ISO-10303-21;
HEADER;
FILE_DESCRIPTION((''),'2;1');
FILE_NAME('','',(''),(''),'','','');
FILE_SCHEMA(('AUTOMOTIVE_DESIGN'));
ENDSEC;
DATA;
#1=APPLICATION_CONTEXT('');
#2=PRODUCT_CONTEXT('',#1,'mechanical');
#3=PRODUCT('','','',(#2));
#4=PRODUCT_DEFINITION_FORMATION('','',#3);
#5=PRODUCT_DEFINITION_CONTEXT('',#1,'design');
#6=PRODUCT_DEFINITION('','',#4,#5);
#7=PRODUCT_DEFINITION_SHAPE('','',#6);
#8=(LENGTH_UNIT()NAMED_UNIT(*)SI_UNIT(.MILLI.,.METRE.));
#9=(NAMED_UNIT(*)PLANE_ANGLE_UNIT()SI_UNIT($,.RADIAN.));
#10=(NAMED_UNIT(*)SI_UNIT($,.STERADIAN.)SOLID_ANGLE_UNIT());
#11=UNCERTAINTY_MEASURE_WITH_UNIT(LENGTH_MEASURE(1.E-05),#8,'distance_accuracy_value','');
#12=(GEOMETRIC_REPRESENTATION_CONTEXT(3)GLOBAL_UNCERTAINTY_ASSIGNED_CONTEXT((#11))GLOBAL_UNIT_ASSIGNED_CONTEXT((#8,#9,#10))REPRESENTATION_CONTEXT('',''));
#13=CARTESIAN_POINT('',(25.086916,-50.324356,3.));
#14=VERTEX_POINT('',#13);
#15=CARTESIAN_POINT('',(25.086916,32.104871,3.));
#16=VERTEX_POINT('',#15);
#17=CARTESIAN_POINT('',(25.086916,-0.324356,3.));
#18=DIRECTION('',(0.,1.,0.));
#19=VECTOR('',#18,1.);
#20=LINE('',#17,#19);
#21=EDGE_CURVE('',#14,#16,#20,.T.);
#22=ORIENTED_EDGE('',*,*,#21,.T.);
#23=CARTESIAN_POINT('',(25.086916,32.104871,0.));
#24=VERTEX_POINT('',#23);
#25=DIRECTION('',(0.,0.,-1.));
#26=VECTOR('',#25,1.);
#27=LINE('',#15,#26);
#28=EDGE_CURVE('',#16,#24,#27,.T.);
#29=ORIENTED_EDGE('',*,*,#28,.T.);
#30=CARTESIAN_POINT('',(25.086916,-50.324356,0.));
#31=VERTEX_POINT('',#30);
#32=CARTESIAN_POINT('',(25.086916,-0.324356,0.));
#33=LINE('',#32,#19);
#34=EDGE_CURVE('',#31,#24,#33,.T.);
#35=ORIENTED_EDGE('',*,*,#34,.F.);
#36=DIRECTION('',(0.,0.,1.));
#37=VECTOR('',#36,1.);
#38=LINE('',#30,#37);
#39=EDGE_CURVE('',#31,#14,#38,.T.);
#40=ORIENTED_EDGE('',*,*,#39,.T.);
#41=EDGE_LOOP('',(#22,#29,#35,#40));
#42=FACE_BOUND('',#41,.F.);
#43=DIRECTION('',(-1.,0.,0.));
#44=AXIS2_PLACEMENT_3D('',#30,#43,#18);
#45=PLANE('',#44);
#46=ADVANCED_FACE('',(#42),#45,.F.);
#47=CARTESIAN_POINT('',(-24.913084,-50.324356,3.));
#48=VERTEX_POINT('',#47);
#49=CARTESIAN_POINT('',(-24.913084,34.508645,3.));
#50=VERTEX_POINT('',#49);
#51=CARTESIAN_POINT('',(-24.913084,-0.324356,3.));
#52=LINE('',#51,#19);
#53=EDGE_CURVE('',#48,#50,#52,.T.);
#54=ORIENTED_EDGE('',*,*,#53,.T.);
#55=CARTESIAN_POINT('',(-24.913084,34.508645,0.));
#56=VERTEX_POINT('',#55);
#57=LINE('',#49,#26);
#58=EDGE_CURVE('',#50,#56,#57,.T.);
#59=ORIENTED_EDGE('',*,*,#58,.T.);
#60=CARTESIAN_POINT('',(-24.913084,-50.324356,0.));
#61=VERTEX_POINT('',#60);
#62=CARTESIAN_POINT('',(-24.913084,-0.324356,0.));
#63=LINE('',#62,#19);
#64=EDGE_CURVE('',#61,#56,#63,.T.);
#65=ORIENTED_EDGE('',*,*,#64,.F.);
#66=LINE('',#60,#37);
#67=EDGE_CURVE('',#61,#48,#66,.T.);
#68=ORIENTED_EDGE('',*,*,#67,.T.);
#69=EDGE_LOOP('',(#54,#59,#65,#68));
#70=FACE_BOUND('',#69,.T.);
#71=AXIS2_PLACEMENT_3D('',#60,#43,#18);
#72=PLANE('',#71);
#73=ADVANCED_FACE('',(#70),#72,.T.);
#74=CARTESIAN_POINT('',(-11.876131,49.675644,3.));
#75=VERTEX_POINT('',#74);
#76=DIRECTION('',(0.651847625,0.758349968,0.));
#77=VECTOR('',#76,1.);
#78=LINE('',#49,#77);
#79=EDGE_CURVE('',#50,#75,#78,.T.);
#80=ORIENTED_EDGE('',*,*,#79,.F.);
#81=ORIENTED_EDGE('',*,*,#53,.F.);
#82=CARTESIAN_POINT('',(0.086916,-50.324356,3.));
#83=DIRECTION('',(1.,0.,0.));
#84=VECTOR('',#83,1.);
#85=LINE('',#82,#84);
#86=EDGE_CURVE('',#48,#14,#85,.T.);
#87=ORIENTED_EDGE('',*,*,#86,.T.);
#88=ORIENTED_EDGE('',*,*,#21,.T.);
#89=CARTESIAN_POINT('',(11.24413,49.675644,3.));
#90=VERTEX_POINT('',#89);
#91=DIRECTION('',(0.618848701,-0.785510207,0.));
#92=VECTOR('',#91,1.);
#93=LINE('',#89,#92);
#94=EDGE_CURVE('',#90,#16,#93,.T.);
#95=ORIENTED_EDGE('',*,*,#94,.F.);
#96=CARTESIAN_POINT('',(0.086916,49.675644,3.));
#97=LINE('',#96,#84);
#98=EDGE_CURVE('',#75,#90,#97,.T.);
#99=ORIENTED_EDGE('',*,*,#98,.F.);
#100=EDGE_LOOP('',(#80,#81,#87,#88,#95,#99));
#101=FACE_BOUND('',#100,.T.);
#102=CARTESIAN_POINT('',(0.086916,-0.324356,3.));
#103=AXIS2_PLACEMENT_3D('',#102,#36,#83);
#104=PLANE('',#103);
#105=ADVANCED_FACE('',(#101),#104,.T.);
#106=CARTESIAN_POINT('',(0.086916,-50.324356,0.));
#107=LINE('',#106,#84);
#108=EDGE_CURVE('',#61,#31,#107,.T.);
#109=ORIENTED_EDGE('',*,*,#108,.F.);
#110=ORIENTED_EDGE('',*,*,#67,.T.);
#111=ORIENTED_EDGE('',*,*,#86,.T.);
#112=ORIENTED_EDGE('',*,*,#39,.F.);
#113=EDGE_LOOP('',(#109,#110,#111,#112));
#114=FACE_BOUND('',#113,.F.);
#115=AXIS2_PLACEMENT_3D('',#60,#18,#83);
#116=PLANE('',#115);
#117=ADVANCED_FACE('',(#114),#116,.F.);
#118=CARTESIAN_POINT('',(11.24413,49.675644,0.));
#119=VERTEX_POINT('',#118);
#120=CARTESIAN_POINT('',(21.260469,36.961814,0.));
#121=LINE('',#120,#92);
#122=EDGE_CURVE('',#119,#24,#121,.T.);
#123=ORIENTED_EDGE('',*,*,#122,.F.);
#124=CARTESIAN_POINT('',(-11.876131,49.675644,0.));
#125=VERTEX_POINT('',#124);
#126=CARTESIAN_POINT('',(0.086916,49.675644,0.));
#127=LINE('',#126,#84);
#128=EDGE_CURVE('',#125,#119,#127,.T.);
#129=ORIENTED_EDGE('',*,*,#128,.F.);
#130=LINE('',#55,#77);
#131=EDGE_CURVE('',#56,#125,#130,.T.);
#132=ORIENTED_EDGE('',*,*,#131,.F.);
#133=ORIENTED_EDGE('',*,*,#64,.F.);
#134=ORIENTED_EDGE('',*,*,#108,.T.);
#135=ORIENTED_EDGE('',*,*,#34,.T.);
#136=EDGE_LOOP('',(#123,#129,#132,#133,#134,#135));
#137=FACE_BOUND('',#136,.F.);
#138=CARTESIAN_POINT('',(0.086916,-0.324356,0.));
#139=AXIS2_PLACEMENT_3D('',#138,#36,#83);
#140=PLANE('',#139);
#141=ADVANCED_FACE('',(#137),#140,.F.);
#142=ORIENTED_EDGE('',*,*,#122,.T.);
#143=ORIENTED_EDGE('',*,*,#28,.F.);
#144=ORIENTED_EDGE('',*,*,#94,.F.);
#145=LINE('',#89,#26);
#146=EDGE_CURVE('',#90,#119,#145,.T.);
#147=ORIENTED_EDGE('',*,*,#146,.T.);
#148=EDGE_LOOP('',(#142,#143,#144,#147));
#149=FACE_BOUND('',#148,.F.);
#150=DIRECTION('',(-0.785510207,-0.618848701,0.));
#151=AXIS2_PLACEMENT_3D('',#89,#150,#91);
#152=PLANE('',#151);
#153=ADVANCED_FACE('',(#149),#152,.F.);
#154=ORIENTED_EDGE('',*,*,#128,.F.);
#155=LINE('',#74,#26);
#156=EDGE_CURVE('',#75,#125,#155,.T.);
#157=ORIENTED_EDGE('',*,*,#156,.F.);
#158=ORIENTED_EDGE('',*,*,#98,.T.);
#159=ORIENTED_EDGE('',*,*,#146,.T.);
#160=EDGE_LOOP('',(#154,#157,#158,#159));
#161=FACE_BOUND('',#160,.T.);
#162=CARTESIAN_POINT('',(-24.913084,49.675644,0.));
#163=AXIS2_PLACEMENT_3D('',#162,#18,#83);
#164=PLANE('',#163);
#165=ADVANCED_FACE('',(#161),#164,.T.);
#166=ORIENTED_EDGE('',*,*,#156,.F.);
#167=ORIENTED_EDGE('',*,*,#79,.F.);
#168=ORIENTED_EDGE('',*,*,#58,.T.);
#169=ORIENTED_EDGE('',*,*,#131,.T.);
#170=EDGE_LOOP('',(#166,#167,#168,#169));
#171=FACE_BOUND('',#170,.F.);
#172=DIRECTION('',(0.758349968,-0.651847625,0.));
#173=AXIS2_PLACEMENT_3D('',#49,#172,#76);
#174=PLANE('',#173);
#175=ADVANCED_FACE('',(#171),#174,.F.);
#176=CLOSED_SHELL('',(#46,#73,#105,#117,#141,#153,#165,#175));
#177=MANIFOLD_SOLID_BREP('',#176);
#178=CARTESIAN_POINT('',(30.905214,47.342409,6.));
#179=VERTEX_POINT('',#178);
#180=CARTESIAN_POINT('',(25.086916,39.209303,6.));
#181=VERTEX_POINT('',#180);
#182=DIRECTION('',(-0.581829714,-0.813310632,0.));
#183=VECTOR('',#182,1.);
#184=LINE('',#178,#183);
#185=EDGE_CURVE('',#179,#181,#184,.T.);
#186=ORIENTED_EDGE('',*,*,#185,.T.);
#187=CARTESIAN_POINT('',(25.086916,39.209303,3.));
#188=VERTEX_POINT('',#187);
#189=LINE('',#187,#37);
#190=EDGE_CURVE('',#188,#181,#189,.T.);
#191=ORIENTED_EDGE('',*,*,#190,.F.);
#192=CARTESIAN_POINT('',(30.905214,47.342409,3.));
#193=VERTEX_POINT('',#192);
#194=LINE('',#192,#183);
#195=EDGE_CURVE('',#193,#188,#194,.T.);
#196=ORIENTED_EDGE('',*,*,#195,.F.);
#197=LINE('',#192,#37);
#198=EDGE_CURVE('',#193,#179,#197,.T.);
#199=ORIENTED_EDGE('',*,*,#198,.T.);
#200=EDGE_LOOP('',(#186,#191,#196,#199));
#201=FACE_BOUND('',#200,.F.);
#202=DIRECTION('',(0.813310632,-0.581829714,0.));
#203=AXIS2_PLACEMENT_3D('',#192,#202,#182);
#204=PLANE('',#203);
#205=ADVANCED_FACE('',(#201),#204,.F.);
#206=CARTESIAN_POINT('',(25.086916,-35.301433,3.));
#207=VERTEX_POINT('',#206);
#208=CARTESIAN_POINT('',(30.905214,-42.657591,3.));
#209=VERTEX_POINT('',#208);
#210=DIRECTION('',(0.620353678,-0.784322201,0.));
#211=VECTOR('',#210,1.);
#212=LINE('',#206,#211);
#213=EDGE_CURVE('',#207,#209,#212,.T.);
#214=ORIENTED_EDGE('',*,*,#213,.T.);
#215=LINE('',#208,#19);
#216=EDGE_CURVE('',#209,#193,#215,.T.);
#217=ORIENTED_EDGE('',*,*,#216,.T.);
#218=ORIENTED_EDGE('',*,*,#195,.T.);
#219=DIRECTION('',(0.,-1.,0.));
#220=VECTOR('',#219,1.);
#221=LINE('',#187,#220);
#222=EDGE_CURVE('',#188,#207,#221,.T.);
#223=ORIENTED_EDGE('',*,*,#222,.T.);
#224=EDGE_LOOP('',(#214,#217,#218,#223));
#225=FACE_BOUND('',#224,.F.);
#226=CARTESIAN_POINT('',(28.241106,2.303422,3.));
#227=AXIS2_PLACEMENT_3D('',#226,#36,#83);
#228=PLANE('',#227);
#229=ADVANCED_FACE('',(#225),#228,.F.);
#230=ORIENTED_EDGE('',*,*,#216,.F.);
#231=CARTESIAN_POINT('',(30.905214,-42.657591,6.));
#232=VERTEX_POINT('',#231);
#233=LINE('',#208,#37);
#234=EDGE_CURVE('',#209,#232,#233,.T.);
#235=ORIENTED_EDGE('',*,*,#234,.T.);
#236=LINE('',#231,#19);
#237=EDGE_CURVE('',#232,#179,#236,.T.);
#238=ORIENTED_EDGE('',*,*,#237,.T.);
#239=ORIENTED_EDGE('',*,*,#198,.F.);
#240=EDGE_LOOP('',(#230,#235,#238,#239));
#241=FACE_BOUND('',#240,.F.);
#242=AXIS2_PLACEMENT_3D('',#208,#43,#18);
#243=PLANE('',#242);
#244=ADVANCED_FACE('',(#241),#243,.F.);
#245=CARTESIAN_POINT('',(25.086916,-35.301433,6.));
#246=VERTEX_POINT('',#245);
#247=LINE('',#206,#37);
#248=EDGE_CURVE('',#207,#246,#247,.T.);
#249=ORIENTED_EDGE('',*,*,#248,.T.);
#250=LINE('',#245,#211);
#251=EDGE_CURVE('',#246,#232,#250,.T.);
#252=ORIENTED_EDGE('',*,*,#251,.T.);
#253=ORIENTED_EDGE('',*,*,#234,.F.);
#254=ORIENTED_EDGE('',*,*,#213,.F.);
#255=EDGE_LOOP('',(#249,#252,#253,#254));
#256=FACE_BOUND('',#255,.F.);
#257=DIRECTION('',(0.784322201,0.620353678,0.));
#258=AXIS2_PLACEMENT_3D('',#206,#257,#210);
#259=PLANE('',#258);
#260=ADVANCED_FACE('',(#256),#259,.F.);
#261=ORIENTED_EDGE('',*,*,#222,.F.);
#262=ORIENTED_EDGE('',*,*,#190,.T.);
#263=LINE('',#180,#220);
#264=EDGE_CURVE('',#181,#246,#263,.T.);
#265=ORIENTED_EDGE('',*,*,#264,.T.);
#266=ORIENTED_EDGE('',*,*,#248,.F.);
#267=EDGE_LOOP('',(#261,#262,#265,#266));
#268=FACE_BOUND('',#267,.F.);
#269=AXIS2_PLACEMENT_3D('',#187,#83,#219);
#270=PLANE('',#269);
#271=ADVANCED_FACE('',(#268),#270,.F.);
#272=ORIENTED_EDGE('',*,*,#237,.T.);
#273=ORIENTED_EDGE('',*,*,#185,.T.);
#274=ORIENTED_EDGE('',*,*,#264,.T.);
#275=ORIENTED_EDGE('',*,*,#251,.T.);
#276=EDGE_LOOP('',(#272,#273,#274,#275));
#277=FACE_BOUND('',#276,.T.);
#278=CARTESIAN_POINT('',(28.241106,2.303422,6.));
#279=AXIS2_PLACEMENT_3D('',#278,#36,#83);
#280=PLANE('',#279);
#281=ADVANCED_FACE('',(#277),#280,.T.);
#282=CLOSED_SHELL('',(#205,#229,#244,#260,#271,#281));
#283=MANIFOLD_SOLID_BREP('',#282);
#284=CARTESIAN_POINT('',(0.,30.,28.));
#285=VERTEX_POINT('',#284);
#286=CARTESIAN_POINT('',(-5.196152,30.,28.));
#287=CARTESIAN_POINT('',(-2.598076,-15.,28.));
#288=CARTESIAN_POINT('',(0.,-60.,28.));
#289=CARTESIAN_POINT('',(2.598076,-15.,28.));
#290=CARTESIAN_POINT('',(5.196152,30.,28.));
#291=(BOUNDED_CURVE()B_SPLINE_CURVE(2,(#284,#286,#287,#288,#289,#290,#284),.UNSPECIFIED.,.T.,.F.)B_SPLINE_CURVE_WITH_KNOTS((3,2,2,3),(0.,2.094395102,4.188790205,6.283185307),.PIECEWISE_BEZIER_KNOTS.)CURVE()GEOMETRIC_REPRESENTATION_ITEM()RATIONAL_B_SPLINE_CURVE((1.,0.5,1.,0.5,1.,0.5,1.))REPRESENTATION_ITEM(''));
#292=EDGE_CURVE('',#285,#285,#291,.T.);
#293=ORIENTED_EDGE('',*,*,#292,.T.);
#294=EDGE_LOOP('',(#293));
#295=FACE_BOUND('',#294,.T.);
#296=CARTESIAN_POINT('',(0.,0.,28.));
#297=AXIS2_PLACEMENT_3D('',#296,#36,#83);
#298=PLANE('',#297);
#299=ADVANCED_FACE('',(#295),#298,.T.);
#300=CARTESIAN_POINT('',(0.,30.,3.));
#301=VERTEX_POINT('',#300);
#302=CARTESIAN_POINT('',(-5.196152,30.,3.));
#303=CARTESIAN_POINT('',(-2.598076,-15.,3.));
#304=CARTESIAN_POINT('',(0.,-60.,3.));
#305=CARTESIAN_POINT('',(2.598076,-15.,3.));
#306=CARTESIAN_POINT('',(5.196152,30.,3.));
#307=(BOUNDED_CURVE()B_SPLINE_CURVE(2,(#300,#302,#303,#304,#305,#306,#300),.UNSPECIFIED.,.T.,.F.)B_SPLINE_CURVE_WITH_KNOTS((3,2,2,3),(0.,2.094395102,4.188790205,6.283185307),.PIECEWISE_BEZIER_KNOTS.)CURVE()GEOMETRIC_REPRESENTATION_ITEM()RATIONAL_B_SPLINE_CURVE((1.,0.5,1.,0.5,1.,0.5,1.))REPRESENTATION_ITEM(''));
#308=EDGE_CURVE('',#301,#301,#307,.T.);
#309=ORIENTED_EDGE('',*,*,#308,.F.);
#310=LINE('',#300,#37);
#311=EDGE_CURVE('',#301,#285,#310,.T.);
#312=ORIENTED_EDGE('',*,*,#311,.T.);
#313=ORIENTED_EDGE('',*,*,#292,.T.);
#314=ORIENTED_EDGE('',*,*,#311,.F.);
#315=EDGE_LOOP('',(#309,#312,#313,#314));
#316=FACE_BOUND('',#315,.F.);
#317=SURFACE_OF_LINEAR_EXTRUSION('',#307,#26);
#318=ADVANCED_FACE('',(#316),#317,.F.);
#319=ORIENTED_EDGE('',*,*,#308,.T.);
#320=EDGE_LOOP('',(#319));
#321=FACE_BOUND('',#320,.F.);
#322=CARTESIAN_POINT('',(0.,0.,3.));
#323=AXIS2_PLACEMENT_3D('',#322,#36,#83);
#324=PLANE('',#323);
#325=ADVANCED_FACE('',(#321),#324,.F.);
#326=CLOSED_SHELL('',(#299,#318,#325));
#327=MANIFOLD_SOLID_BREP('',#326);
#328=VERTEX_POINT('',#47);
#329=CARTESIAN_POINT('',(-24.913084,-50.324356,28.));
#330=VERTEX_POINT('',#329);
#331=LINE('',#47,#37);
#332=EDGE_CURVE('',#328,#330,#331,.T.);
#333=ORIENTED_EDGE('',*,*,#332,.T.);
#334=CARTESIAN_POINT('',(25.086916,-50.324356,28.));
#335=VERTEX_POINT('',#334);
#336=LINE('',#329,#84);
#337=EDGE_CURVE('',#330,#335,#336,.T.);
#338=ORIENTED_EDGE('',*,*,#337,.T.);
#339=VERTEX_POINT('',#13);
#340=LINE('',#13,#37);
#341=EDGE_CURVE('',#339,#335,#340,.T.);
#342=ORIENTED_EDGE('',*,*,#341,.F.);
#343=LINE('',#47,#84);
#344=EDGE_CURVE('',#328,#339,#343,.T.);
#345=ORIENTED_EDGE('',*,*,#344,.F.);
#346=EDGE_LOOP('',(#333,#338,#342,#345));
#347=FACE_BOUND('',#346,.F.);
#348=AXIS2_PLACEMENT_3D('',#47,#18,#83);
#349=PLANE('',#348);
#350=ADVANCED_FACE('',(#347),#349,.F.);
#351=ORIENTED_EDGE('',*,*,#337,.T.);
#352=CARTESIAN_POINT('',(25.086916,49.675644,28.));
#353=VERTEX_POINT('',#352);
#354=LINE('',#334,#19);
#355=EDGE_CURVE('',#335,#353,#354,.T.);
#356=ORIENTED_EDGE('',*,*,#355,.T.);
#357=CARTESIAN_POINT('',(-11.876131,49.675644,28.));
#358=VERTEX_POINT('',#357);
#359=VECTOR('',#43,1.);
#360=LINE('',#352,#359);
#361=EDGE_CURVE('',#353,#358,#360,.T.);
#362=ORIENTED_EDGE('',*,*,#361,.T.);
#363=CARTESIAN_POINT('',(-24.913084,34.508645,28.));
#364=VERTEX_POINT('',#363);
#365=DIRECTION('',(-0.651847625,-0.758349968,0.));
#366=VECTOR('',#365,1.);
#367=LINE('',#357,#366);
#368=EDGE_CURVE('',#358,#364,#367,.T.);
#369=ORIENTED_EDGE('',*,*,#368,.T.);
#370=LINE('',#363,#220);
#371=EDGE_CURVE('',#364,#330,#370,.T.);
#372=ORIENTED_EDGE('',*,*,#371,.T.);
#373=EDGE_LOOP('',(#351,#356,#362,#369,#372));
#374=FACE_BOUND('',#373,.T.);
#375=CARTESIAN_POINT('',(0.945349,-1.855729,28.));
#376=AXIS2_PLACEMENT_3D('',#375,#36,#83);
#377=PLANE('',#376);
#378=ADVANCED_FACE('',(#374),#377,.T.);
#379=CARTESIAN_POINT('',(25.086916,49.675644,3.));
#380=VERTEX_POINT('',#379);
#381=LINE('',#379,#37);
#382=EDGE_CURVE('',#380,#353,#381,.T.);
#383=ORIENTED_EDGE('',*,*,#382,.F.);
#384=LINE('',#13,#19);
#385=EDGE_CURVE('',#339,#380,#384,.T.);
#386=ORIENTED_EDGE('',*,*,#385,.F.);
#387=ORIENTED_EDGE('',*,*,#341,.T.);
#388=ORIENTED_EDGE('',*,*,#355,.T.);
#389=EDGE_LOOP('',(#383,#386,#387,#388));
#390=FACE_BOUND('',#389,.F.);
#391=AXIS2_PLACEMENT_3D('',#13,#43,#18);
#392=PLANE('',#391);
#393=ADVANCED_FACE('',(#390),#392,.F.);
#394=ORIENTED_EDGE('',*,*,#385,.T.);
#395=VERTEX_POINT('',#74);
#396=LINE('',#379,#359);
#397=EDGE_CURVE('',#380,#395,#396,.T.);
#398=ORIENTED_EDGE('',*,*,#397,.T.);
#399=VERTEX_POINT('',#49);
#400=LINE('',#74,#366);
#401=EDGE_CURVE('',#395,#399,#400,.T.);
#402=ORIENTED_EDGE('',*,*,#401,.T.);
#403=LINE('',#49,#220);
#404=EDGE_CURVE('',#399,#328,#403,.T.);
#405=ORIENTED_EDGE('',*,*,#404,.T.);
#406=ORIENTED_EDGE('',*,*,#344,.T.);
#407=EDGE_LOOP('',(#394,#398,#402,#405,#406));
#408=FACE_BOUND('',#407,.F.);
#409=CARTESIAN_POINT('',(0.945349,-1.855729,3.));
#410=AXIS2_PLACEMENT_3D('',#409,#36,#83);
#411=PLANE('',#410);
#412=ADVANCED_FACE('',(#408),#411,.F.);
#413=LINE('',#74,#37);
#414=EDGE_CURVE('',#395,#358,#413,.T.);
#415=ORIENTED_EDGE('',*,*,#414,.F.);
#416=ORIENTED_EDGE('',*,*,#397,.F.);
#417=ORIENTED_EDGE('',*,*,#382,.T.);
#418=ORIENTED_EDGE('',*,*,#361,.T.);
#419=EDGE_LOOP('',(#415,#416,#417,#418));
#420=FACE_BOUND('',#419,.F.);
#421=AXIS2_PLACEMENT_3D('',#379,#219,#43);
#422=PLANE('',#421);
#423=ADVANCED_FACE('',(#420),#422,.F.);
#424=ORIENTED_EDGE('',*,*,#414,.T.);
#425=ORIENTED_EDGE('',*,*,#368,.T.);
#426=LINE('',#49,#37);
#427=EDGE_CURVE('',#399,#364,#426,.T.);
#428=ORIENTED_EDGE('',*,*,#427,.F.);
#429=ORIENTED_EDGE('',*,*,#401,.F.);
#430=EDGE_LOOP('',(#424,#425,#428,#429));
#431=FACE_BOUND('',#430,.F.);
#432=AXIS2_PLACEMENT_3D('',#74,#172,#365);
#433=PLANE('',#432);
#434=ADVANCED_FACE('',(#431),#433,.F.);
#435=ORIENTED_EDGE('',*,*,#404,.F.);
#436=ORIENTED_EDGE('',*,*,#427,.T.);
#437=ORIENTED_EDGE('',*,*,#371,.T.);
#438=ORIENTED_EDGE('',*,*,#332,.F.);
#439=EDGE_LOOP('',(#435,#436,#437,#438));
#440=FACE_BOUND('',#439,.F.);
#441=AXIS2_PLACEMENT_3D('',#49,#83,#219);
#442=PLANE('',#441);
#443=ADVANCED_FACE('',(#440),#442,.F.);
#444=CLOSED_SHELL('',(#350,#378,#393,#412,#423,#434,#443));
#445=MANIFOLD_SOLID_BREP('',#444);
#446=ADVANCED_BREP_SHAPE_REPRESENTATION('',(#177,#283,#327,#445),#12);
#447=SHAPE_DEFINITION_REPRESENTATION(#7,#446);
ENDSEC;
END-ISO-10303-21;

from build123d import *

# Parameters (mm, degrees)
F0_W      = 50
F0_H      = 100
F1_DEPTH  = 3
F3_DEPTH  = 3
F6_DEPTH  = 3
F8_DEPTH  = 25
F12_DEPTH = 25


# Not quite as in the source:
# - a feature of the source that left no trace in its solid (it failed there, or was rolled back) is left out


with BuildPart() as f1:
    # F0 (on Top) → F1 (new body)
    with BuildSketch(Plane.XY):
        with Locations((0.0869164988, -0.3243560148)):
            Rectangle(F0_W, F0_H)
    extrude(amount=F1_DEPTH)

    # F4 (on face) → F6 (cut)
    with BuildSketch(Plane.XY.offset(3)):
        Polygon((-24.9130835012, 49.6756439852), (-24.9130835012, 34.5086446194), (-11.8761310107, 49.6756439852), align=None)
    extrude(amount=-F6_DEPTH, mode=Mode.SUBTRACT)

    # F7 (on face) → F8 (cut)
    with BuildSketch(Plane.XY.offset(3)):
        Polygon((25.0869164988, 49.6756439852), (11.2441298249, 49.6756439852), (25.0869164988, 32.1048707049), align=None)
    extrude(amount=-F8_DEPTH, mode=Mode.SUBTRACT)


with BuildPart() as f3:
    # F2 (on face) → F3 (new body)
    with BuildSketch(Plane.XY.offset(3)):
        Polygon((30.9052136403, 47.3424089814), (25.0869164988, 39.2093026638), (25.0869164988, -35.3014330966), (30.9052136403, -42.6575910186), align=None)
    extrude(amount=F3_DEPTH)


with BuildPart() as f12:
    # F10 (on face) → F12 (new body)
    with BuildSketch(Plane.XY.offset(3)):
        with BuildLine():
            add(Edge.make_bspline(
                [(0, 30), (-5.1961524227, 30), (-2.5980762114, -15), (0, -60), (2.5980762114, -15), (5.1961524227, 30), (0, 30)],
                knots=[0, 0, 0, 2.0943951024, 2.0943951024, 4.1887902048, 4.1887902048, 6.2831853072, 6.2831853072, 6.2831853072], degree=2, weights=[1, 0.5, 1, 0.5, 1, 0.5, 1]))
        make_face()
    extrude(amount=F12_DEPTH)


with BuildPart() as f12b:
    # F9 (on face) → F12, piece 2 (new body)
    with BuildSketch(Plane.XY.offset(3)):
        Polygon((25.0869164988, -50.3243560148), (25.0869164988, 49.6756439852), (-11.8761310107, 49.6756439852), (-24.9130835012, 34.5086446194), (-24.9130835012, -50.3243560148), align=None)
    extrude(amount=F12_DEPTH)


solid = Compound([f1.part, f3.part, f12.part, f12b.part])
